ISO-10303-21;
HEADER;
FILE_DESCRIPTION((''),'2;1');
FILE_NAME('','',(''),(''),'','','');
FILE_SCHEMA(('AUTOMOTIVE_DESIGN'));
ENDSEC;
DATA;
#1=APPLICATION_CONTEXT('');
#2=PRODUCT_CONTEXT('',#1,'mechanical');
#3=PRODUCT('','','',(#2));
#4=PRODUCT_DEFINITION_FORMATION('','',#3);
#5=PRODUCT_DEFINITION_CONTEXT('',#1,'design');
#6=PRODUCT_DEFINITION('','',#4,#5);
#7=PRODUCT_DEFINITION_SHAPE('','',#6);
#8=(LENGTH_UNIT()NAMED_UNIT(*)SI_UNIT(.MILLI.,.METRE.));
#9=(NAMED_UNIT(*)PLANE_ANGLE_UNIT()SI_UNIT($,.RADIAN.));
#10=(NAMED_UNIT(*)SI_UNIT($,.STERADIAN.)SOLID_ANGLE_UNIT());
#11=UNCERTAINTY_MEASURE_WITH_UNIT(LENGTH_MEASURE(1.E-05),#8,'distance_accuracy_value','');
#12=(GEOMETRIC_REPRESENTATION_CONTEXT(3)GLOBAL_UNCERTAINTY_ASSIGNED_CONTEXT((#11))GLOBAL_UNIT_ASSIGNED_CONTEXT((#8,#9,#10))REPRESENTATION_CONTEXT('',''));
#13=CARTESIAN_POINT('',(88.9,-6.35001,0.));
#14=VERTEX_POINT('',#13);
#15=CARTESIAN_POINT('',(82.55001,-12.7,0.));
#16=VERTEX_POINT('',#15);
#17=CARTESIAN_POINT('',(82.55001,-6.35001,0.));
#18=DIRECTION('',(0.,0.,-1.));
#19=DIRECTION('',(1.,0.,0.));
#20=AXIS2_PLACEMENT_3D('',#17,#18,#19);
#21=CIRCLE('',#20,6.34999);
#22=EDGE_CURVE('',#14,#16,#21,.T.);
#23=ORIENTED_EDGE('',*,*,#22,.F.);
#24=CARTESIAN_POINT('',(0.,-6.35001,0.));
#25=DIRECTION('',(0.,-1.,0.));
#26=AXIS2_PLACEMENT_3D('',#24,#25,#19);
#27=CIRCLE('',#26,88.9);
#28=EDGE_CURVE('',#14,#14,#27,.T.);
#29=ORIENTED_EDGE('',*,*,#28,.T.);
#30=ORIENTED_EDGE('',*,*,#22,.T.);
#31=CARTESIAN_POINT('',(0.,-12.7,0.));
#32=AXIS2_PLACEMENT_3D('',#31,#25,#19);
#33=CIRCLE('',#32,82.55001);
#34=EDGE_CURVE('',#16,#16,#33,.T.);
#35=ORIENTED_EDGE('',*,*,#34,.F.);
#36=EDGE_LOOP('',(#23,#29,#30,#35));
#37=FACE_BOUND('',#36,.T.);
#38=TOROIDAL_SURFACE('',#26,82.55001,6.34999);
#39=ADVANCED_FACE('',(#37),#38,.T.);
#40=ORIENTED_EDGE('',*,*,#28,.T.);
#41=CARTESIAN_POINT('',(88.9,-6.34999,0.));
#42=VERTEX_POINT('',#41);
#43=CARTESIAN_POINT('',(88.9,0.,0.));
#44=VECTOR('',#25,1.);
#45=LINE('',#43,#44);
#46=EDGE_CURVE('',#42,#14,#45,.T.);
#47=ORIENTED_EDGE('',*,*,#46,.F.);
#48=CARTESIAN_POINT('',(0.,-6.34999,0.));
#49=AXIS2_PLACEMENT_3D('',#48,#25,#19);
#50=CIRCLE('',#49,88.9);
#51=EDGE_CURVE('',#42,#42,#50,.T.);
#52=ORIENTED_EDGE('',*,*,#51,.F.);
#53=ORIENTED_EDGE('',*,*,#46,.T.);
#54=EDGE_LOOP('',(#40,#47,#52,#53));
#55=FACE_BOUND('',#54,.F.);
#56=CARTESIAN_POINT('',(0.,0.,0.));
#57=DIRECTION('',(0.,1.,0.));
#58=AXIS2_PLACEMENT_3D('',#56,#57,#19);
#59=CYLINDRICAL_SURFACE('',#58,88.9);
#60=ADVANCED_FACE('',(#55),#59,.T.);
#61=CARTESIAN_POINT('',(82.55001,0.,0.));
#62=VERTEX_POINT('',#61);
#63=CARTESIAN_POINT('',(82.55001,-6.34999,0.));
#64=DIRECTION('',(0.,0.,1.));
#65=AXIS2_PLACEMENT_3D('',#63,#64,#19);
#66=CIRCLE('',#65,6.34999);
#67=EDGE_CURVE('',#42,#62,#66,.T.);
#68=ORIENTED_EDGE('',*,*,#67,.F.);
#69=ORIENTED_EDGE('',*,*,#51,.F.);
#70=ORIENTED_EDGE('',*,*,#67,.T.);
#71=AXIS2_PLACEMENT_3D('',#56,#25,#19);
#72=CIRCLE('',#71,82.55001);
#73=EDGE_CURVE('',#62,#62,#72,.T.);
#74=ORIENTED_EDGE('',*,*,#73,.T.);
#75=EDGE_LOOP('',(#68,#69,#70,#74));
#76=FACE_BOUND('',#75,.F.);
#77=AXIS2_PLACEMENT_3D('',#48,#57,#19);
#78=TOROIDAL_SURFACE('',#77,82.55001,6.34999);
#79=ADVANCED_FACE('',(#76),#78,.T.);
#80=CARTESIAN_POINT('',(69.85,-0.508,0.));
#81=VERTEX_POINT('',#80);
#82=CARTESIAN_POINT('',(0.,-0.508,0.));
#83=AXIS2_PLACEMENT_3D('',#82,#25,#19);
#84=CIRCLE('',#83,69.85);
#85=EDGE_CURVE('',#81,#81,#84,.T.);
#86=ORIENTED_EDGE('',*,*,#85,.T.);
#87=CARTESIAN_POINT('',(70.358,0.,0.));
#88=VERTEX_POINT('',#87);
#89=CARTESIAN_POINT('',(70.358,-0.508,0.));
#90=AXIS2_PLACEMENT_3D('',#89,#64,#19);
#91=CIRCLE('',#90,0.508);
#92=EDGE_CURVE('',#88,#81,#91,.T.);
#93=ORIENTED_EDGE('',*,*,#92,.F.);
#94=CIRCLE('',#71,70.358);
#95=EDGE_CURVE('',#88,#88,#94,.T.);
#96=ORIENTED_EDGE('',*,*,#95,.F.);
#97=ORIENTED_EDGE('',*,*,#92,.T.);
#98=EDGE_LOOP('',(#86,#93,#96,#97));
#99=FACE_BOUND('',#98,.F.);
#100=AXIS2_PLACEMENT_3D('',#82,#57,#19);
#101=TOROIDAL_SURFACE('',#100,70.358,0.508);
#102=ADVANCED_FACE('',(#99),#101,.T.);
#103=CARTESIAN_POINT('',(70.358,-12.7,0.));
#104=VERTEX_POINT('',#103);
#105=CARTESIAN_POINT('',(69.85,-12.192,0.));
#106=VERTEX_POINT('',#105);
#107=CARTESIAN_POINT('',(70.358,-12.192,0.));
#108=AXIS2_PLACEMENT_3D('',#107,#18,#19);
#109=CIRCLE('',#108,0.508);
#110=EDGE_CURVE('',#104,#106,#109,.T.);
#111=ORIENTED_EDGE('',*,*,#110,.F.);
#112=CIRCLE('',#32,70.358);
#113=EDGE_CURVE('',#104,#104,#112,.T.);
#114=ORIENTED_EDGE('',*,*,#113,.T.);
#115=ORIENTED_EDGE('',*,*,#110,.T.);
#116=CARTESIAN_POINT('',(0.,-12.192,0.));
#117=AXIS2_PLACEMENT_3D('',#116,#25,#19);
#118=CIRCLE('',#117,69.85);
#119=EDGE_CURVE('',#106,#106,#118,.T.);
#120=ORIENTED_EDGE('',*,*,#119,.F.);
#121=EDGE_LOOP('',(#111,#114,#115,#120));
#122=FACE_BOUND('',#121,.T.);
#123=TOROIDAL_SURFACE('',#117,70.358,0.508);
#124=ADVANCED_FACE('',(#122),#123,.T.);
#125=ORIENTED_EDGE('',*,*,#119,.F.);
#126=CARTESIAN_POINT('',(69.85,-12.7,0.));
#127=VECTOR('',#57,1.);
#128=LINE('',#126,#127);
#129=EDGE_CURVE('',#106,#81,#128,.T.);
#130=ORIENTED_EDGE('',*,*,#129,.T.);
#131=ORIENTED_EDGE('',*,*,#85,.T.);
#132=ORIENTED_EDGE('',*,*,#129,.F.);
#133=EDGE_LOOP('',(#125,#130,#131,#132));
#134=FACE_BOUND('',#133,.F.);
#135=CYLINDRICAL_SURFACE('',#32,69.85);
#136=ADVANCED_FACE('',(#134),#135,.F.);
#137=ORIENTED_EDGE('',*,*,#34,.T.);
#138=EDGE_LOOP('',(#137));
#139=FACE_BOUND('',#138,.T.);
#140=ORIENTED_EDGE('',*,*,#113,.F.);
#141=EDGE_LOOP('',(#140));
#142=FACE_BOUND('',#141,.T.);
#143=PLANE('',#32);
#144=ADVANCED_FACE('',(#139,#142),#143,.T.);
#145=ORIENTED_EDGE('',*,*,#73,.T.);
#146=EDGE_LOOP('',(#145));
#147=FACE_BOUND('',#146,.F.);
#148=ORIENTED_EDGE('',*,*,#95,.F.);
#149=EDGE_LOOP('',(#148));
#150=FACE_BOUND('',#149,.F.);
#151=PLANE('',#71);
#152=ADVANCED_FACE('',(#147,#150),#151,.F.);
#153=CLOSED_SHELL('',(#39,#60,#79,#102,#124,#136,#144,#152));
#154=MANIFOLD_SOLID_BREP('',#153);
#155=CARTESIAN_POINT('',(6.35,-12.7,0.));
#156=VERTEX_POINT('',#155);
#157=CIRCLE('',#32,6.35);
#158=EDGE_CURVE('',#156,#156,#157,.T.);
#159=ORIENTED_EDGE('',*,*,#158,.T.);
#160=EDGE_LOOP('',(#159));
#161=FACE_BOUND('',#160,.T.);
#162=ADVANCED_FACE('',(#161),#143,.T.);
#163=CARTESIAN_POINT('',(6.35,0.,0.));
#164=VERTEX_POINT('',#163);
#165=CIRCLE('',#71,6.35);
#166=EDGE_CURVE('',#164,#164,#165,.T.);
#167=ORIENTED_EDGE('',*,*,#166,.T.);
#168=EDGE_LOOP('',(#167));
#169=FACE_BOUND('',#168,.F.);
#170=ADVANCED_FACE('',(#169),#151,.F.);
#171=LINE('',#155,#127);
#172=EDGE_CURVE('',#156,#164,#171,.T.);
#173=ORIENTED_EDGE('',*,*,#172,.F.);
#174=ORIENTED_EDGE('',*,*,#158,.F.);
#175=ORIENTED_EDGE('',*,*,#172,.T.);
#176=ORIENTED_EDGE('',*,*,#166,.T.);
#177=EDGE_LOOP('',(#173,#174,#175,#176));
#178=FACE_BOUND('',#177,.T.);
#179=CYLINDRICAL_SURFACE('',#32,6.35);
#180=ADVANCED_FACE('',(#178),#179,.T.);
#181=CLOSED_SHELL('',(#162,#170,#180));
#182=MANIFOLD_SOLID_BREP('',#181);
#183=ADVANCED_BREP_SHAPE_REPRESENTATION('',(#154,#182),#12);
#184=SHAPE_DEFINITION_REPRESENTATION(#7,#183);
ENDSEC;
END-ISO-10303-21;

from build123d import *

# Parameters (mm, degrees)
F0_R     = 88.9
F1_DEPTH = 12.7
F2_R     = 69.85
F2_R_2   = 6.35
F3_DEPTH = 25.4
F4_R     = 6.34999
F5_R     = 0.508


# Not quite as in the source:
# - a fillet or chamfer is up to 0.001 mm smaller than in the source, because OpenCascade refuses the exact size


with BuildPart() as f1:
    # F0 (on Front) → F1 (new body)
    with BuildSketch(Plane.XZ):
        Circle(F0_R)
    extrude(amount=F1_DEPTH)

    # F2 (on face) → F3 (cut)
    with BuildSketch(Plane.XZ.offset(12.7)):
        Circle(F2_R)
        Circle(F2_R_2, mode=Mode.SUBTRACT)
    extrude(amount=-F3_DEPTH, mode=Mode.SUBTRACT)

    # F4 (radius 6.35 in the source; OpenCascade refuses exactly that, so slightly less here)
    f4_edges = [f1.edges().sort_by_distance(p)[0] for p in [
        (-88.9, -12.7, 0),
        (-88.9, 0, 0),
    ]]
    fillet(f4_edges, radius=F4_R)

    # F5
    f5_edges = [f1.edges().sort_by_distance(p)[0] for p in [
        (-69.85, 0, 0),
        (-69.85, -12.7, 0),
    ]]
    fillet(f5_edges, radius=F5_R)


solid = f1.part
